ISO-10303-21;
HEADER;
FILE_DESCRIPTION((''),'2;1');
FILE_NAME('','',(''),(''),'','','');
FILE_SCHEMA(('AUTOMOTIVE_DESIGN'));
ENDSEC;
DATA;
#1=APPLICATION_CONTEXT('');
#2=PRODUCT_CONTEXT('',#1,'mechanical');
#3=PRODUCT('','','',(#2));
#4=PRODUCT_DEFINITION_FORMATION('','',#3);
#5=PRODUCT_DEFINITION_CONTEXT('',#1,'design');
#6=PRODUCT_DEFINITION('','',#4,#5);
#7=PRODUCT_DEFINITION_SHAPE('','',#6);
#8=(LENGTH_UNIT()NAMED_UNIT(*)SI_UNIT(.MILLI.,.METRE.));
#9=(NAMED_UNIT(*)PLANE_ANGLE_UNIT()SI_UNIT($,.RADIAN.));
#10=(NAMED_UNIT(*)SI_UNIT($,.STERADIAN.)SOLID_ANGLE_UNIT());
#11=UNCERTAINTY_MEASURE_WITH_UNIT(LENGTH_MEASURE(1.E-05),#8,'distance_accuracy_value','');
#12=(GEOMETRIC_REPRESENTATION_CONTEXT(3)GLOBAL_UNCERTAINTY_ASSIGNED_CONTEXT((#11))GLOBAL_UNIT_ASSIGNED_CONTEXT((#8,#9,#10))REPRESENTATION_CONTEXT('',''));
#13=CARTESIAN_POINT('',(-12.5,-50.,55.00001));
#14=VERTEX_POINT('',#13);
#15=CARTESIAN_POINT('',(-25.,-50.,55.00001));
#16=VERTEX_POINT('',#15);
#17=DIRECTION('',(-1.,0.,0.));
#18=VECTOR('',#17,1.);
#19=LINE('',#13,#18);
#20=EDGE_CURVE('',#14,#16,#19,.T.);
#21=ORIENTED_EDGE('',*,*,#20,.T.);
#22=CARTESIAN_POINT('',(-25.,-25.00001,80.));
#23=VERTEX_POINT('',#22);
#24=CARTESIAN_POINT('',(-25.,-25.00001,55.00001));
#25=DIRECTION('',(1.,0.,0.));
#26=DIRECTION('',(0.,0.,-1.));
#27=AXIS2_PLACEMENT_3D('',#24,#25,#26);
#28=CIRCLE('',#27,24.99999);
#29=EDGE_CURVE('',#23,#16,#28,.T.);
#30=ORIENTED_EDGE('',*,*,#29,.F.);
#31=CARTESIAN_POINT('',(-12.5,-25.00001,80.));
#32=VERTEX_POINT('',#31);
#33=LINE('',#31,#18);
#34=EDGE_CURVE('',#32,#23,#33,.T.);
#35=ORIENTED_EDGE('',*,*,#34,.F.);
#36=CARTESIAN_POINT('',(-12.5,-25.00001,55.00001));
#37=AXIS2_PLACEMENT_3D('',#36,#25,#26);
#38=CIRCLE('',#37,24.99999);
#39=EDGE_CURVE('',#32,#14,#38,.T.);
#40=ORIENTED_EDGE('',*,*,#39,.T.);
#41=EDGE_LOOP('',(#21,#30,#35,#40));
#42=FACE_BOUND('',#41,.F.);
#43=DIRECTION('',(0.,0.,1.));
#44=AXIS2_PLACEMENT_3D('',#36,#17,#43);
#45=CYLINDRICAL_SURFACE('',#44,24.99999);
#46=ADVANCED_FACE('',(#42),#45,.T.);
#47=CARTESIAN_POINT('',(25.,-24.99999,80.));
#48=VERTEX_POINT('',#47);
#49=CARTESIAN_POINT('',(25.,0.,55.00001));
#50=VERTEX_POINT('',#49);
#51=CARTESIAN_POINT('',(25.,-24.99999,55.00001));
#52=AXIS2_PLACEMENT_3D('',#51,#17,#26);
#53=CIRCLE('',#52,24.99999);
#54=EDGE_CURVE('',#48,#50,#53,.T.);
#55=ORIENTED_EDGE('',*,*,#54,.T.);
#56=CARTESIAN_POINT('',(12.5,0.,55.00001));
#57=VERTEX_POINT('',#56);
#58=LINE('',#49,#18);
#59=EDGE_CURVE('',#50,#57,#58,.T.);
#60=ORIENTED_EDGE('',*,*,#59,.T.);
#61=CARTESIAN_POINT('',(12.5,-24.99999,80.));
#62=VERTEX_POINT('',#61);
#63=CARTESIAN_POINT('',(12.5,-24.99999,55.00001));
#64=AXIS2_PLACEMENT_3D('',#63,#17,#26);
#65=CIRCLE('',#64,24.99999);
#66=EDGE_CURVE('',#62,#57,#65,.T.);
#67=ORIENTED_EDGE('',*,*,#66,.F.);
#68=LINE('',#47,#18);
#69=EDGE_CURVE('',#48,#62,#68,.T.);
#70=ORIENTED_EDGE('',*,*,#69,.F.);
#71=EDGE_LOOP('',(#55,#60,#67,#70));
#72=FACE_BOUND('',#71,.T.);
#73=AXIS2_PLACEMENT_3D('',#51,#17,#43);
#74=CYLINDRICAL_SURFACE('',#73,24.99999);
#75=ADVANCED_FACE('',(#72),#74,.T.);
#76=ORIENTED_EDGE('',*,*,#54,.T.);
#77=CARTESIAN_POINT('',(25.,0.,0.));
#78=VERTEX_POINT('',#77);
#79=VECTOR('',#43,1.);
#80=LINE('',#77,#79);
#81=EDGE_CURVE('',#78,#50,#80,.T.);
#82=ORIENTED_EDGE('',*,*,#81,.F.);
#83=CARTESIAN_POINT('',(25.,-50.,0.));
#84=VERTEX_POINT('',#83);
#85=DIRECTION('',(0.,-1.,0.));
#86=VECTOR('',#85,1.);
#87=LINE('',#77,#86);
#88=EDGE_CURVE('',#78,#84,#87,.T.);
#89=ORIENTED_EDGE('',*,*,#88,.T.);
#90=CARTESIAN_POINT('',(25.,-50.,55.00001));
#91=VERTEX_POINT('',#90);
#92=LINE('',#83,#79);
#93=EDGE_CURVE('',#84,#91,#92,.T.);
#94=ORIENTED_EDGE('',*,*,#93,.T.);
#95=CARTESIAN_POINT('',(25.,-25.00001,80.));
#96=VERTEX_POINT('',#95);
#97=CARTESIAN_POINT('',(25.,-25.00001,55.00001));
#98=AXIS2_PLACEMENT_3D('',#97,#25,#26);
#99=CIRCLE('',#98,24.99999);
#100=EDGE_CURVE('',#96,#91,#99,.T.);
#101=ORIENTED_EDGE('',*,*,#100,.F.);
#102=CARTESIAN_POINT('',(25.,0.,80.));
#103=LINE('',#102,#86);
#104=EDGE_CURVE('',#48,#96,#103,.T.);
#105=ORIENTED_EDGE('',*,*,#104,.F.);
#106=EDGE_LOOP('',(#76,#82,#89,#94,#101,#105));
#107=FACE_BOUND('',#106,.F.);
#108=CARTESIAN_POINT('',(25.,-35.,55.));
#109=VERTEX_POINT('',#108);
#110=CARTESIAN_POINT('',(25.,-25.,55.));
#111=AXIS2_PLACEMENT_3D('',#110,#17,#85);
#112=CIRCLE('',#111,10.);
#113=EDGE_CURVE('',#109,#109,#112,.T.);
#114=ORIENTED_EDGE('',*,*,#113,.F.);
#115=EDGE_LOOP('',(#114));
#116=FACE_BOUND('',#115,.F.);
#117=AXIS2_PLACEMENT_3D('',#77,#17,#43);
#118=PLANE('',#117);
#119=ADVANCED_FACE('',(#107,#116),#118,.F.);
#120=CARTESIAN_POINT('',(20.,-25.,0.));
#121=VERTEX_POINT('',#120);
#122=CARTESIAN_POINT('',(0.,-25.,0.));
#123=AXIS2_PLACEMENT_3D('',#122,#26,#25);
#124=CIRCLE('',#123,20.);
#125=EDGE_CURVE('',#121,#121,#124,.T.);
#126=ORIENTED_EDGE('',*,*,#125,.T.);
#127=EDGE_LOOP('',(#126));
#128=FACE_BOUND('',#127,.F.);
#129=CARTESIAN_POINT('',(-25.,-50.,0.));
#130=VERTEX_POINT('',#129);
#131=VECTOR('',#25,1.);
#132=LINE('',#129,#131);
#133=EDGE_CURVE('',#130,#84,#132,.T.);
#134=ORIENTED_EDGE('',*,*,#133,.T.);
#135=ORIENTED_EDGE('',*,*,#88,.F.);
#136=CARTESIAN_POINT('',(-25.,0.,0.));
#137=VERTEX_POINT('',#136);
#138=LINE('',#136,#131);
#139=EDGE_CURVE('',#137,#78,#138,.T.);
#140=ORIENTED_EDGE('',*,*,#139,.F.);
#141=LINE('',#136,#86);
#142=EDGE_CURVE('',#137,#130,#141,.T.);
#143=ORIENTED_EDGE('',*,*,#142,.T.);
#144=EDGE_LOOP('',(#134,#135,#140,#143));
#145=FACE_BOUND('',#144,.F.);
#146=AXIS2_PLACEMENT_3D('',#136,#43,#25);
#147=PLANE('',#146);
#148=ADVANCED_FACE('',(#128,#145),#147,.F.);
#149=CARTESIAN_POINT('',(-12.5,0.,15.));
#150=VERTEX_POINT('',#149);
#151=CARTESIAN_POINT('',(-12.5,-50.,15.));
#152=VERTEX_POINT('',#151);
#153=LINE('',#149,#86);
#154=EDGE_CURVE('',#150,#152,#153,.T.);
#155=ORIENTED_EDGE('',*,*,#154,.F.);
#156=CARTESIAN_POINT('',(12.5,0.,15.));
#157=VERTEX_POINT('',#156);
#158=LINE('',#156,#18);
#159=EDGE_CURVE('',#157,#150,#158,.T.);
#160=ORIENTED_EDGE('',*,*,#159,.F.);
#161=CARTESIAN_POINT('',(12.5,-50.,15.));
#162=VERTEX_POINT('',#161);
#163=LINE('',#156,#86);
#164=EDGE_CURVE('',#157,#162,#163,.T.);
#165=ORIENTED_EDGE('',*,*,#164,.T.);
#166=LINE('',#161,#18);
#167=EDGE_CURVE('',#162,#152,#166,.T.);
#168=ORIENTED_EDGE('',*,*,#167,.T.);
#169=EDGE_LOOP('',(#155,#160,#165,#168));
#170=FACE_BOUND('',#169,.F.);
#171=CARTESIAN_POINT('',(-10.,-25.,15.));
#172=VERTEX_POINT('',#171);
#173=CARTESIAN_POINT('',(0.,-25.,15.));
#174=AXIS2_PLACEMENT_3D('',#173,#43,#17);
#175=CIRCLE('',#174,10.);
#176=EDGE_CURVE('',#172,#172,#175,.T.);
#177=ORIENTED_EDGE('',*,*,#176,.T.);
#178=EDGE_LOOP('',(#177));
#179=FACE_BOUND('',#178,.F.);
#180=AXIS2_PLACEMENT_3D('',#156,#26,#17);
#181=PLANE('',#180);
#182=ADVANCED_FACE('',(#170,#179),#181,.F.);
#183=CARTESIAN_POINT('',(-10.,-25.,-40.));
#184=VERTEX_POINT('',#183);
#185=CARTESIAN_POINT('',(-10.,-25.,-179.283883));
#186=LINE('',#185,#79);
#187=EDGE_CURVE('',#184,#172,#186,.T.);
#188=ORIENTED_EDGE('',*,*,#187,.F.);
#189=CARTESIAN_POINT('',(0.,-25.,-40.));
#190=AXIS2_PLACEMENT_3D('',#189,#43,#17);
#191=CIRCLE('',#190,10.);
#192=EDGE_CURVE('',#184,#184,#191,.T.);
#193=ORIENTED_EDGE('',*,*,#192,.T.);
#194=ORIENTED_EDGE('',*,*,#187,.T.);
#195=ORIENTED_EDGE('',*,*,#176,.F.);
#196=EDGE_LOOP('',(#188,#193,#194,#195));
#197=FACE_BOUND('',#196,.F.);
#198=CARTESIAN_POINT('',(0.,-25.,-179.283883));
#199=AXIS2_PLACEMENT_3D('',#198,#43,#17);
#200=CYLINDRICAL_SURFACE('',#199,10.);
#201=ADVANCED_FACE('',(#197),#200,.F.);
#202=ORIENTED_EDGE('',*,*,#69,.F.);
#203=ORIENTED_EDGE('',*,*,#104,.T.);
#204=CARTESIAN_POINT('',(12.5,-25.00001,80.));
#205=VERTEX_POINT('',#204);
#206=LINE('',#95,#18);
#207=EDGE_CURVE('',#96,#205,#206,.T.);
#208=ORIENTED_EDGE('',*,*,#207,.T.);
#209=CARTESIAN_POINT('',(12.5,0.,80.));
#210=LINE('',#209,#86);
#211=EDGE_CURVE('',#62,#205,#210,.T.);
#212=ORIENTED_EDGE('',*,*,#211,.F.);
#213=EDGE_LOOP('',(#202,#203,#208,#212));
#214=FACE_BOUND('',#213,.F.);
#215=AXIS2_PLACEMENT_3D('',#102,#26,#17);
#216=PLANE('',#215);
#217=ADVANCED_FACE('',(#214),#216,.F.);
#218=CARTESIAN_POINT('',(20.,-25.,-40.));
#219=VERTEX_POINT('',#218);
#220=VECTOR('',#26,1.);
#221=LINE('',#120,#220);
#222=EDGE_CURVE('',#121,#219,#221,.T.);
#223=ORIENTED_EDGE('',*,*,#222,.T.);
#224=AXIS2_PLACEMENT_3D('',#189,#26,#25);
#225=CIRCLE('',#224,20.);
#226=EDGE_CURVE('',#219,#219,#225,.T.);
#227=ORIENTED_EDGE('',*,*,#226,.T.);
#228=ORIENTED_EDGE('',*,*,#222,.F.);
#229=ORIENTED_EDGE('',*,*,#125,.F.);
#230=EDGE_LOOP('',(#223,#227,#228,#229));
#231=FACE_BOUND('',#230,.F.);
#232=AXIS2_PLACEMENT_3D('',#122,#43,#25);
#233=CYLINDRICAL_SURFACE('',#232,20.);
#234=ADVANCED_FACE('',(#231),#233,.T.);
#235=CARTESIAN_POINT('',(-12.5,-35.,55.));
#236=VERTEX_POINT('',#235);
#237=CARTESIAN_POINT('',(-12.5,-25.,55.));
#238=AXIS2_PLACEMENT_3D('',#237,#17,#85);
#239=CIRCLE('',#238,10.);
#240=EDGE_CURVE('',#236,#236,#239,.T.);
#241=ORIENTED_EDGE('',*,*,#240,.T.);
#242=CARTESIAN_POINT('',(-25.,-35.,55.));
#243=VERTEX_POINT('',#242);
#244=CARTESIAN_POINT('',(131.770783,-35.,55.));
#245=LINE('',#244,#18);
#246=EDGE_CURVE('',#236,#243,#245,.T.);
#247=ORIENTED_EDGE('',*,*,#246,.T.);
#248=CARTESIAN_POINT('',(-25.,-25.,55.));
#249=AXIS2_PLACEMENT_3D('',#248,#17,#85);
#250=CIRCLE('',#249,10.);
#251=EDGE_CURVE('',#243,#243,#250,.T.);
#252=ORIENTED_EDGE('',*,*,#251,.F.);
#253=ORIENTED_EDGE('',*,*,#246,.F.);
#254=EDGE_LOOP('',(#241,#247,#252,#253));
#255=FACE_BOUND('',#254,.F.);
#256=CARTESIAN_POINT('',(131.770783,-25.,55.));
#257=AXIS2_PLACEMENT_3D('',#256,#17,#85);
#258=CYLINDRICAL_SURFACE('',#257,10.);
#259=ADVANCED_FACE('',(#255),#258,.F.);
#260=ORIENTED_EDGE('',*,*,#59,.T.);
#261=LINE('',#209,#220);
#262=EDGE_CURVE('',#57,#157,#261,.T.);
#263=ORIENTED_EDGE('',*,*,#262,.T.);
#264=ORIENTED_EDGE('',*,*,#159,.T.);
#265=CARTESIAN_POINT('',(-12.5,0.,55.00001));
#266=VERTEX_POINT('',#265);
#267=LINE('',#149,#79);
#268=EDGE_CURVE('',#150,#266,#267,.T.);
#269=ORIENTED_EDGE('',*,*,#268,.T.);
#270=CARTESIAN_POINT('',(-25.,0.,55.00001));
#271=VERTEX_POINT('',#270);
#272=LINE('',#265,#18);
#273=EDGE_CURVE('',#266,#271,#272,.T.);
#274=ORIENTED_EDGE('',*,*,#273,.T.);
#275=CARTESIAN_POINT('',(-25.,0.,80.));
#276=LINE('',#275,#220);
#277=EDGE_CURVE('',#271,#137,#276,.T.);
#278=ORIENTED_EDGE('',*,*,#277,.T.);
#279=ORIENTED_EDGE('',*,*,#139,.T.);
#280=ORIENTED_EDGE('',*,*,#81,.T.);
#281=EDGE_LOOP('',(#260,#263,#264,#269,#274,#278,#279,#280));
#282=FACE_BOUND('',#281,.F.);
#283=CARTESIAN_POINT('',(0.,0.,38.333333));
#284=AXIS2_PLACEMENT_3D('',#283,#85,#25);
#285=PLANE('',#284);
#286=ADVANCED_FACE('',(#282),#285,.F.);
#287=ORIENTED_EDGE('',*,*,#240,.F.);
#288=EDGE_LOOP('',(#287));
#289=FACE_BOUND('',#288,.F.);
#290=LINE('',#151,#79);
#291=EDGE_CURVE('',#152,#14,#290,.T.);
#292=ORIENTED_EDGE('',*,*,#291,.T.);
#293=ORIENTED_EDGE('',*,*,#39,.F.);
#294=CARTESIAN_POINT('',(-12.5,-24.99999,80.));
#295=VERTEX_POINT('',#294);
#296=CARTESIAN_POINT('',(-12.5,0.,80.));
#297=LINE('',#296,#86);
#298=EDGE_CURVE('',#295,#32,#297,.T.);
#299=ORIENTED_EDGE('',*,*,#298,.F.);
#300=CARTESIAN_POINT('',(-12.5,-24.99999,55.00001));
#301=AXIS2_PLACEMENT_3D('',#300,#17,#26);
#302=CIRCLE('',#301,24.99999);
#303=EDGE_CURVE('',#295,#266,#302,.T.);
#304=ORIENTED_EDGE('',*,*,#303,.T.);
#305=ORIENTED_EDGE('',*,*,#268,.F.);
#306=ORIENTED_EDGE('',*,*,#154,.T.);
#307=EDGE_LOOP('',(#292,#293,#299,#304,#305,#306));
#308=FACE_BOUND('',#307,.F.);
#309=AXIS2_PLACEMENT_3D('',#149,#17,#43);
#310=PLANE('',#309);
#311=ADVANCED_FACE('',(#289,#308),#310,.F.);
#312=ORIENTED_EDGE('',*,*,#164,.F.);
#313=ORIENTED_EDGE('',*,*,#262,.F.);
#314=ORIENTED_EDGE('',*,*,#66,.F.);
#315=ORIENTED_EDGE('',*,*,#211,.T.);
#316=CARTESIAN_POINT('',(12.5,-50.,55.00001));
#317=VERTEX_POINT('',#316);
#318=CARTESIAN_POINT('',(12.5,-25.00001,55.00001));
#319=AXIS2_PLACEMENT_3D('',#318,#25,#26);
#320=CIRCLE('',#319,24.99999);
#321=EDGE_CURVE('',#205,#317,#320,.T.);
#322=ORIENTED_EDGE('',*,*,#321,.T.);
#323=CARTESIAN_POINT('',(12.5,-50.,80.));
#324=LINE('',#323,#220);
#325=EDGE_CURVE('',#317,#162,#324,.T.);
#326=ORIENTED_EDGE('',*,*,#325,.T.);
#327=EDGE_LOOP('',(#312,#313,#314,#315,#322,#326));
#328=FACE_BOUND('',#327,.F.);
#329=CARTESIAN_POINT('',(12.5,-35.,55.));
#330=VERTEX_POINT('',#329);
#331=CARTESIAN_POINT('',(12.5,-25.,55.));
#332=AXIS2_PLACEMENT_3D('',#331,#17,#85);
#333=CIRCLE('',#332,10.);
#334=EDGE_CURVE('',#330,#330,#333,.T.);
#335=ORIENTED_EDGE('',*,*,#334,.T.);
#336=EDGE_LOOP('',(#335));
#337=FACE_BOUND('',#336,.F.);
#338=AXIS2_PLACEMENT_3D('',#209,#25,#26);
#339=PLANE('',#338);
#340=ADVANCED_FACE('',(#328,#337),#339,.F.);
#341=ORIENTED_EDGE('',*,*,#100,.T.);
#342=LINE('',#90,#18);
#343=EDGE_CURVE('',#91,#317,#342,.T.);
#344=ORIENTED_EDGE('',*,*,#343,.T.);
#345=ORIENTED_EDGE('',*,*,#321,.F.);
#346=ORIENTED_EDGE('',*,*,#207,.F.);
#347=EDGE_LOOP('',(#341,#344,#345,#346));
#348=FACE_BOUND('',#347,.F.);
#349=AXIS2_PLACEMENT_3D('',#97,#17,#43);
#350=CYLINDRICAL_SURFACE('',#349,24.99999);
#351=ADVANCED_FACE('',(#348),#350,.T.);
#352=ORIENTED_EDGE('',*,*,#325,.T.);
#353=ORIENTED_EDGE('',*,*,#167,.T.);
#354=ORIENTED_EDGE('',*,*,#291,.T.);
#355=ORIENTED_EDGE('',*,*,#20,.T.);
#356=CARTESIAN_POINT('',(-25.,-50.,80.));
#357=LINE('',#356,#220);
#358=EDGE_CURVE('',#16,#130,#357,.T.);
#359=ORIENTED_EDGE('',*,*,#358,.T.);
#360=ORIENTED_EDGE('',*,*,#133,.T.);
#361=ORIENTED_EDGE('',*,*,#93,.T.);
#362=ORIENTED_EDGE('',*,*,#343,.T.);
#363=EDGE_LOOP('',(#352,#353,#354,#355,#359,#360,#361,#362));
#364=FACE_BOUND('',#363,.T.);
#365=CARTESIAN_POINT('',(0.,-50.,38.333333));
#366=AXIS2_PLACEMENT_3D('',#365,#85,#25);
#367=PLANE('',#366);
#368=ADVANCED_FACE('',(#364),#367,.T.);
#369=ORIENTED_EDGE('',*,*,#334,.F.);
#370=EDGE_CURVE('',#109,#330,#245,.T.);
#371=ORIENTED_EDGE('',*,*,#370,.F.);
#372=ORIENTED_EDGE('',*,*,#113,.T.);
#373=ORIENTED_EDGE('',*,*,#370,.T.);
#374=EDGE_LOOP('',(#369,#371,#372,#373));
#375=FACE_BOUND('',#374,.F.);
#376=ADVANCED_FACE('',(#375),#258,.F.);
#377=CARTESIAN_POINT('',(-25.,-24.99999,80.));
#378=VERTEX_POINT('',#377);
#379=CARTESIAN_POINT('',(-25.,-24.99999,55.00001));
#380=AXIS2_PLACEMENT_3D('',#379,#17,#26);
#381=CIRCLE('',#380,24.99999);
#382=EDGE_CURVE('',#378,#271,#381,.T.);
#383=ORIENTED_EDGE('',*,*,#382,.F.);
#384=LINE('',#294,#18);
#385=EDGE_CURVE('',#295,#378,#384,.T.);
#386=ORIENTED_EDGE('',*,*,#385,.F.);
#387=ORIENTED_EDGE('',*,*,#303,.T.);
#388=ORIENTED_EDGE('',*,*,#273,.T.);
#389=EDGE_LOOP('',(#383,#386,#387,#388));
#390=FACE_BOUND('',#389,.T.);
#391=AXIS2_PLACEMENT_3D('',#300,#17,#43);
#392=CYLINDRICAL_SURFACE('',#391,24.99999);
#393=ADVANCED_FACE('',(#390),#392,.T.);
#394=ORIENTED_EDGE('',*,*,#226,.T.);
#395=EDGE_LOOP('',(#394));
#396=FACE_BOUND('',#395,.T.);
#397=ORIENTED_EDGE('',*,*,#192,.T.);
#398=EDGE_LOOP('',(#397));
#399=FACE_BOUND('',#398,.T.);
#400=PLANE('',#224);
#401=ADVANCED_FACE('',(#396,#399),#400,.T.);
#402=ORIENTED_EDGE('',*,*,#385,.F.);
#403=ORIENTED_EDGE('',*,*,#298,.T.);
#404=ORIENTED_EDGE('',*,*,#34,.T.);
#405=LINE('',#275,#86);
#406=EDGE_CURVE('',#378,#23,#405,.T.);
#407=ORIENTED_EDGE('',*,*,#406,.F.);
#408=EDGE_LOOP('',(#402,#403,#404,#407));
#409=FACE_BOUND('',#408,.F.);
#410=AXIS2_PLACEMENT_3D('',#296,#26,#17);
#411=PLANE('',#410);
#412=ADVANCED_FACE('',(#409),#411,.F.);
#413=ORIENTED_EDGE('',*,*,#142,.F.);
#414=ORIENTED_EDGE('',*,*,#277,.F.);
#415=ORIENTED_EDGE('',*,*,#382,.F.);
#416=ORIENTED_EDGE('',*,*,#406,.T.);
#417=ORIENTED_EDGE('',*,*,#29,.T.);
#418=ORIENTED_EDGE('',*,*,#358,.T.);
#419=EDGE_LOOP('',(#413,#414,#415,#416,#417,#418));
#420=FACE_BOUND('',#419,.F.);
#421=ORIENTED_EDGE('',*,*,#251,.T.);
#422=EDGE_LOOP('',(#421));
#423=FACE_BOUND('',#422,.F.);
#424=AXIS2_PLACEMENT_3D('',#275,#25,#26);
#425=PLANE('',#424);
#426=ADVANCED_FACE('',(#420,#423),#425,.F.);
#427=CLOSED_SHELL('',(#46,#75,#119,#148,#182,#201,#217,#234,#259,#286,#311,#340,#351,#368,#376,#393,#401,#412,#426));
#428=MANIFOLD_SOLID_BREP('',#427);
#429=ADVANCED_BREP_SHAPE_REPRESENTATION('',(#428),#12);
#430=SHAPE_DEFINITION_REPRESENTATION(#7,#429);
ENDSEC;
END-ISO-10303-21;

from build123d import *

# Parameters (mm, degrees)
F1_DEPTH = 50
F2_R     = 24.99999
F4_D     = 20
F5_R     = 20
F6_DEPTH = 40
F8_D     = 20


# Not quite as in the source:
# - a fillet or chamfer is up to 0.001 mm smaller than in the source, because OpenCascade refuses the exact size


with BuildPart() as f1:
    # F0 (on Front) → F1 (new body)
    with BuildSketch(Plane.XZ):
        Polygon((-25, 0), (0, 0), (25, 0), (25, 80), (12.5, 80), (12.5, 15), (0, 15), (-12.5, 15), (-12.5, 80), (-25, 80), align=None)
    extrude(amount=F1_DEPTH)

    # F2 (radius 25 in the source; OpenCascade refuses exactly that, so slightly less here)
    f2_edges = [f1.edges().sort_by_distance(p)[0] for p in [
        (18.75, 0, 80),
        (-18.75, 0, 80),
        (-18.75, -50, 80),
        (18.75, -50, 80),
    ]]
    fillet(f2_edges, radius=F2_R)

    # F4 (through all)
    with Locations(Plane.YZ.offset(25)):
        with Locations((-25, 55)):
            Hole(F4_D / 2)

    # F5 (on face) → F6 (join)
    with BuildSketch(Plane(origin=(0, 0, 0), x_dir=(1, 0, 0), z_dir=(0, 0, -1))):
        with Locations((0, 25)):
            Circle(F5_R)
    extrude(amount=F6_DEPTH)

    # F8 (through all)
    with Locations(Plane(origin=(0, 0, -40), x_dir=(1, 0, 0), z_dir=(0, 0, -1))):
        with Locations((0, 25)):
            Hole(F8_D / 2)


solid = f1.part
